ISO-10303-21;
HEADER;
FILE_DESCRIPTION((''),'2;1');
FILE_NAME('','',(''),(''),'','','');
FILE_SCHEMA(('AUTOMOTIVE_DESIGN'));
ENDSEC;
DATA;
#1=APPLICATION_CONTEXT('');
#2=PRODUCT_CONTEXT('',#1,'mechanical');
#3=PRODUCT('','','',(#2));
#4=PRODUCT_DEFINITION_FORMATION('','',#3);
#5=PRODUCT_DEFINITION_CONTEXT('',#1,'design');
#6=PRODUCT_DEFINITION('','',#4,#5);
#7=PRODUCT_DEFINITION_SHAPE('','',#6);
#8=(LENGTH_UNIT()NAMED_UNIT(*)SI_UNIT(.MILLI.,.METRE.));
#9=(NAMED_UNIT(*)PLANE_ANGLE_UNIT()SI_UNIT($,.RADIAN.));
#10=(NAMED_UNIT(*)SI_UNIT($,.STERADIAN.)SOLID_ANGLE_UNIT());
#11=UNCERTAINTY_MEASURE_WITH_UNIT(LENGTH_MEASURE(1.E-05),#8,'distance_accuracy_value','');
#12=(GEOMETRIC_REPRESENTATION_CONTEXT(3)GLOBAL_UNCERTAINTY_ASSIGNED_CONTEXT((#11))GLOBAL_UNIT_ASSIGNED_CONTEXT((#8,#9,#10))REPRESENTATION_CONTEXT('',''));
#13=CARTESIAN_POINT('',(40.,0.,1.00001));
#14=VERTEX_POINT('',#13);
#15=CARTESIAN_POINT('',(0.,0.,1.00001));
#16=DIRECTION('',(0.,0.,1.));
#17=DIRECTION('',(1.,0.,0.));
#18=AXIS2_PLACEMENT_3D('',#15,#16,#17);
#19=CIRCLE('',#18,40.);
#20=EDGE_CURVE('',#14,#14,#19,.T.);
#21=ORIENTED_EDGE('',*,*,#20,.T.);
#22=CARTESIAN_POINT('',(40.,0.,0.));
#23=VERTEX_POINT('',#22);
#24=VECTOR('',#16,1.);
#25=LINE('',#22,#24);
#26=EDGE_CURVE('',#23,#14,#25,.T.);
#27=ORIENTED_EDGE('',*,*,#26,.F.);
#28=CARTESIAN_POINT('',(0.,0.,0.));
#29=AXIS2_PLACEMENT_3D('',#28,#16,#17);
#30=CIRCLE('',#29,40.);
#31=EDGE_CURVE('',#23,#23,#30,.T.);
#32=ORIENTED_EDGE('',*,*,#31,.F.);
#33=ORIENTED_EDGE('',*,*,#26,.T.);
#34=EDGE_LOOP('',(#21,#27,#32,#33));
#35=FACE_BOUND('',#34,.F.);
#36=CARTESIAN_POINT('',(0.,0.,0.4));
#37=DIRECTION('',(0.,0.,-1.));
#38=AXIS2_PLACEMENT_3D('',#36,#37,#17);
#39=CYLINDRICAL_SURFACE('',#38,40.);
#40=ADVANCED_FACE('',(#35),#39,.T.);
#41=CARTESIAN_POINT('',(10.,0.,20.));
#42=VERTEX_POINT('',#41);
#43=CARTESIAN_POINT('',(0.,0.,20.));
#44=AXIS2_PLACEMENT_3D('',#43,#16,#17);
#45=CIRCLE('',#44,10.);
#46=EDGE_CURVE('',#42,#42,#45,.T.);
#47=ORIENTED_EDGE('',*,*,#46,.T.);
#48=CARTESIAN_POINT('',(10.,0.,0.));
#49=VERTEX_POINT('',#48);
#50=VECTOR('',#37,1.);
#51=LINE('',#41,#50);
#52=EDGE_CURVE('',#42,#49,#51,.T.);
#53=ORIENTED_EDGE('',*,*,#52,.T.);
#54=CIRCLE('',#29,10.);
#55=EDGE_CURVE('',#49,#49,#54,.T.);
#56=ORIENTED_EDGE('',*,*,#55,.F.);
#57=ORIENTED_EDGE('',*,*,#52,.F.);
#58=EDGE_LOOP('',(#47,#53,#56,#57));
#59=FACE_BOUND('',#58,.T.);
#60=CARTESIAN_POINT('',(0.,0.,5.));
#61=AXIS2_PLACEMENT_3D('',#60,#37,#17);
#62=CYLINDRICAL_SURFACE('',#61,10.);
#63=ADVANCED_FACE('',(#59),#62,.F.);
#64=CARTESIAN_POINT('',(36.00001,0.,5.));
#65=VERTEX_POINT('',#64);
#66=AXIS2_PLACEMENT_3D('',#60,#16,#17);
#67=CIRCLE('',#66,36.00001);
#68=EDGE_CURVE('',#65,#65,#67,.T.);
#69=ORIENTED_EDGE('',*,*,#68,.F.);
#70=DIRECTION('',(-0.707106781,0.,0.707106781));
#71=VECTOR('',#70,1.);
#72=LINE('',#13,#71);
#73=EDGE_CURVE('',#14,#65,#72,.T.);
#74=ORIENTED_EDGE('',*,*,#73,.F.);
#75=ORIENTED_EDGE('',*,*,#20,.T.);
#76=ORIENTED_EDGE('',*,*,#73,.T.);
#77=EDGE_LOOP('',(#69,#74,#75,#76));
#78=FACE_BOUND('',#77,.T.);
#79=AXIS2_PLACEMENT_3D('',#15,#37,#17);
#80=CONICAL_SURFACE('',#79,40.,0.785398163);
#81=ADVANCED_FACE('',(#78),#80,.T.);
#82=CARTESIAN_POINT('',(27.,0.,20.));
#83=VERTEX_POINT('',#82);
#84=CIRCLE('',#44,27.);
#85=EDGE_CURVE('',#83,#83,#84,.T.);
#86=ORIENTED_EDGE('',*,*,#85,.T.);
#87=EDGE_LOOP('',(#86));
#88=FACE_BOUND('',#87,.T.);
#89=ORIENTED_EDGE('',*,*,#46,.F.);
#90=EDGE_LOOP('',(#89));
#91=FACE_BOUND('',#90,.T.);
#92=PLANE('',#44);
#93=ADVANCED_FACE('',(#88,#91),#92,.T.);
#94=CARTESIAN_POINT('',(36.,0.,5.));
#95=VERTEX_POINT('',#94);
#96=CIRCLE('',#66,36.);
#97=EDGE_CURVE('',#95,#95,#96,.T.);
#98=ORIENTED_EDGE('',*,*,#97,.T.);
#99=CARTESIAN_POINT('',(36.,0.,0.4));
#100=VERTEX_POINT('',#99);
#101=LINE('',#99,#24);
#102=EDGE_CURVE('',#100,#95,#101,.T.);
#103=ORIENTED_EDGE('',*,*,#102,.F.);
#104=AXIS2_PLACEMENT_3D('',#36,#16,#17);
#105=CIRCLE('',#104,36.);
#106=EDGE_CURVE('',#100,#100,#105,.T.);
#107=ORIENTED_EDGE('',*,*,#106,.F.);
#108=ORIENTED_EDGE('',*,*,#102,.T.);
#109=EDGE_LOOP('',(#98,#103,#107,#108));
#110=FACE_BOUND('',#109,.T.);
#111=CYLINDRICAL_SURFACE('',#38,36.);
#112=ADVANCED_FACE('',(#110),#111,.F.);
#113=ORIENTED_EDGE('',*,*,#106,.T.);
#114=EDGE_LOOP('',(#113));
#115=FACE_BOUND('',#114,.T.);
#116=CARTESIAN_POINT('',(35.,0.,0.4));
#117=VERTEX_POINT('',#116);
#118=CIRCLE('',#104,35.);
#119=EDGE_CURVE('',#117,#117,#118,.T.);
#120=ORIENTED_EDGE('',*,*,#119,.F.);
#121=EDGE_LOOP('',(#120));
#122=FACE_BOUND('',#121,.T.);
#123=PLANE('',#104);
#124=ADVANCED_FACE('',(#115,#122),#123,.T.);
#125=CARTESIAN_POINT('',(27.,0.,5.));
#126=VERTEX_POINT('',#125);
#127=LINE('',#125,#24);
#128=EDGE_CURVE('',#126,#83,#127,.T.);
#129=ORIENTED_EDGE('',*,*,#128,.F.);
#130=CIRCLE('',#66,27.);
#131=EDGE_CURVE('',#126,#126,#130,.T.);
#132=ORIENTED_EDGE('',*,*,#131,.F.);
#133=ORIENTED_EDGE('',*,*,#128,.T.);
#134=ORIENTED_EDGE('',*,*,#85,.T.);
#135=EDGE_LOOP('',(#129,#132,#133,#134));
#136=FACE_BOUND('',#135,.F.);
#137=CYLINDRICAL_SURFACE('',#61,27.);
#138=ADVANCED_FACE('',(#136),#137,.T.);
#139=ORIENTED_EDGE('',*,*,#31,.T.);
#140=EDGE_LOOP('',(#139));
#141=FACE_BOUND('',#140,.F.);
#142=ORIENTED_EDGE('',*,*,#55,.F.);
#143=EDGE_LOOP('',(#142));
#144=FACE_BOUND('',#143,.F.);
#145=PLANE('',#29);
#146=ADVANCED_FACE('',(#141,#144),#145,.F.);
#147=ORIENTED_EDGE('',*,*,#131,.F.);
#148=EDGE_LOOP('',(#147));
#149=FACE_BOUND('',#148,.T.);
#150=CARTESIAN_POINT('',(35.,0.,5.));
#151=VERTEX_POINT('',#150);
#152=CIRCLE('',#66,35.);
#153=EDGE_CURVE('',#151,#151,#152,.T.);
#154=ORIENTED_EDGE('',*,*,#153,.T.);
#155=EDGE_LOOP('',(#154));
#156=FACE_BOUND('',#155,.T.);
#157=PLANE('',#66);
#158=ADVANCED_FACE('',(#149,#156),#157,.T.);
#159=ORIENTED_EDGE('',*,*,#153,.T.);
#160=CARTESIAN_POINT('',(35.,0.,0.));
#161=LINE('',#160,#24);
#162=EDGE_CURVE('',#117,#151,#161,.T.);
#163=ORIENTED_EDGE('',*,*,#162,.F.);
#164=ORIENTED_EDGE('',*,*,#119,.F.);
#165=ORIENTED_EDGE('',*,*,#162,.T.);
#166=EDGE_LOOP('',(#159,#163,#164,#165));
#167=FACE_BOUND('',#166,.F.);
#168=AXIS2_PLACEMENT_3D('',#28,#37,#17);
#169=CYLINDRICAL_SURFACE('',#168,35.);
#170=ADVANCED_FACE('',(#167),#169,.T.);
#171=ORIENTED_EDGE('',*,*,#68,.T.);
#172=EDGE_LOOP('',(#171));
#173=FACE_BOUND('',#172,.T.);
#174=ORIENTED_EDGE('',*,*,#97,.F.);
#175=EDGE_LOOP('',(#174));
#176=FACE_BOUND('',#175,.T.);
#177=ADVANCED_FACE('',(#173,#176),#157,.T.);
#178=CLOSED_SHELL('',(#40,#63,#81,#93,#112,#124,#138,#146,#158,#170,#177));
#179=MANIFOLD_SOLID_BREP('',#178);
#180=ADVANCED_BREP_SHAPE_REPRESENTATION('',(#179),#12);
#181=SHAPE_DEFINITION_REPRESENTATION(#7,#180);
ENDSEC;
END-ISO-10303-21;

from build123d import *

# Parameters (mm, degrees)
F0_R     = 35
F0_R_2   = 10
F1_DEPTH = 5
F2_R     = 27
F2_R_2   = 10
F3_DEPTH = 15
F0_R_3   = 40
F4_DEPTH = 0.4
F5_R     = 40
F5_R_2   = 36
F6_DEPTH = 4.6
F7_SIZE  = 3.99999


# Not quite as in the source:
# - a fillet or chamfer is up to 0.001 mm smaller than in the source, because OpenCascade refuses the exact size


with BuildPart() as f1:
    # F0 (on Top) → F1 (new body)
    with BuildSketch(Plane.XY):
        Circle(F0_R)
        Circle(F0_R_2, mode=Mode.SUBTRACT)
    extrude(amount=F1_DEPTH)

    # F2 (on face) → F3 (join)
    with BuildSketch(Plane.XY.offset(5)):
        Circle(F2_R)
        Circle(F2_R_2, mode=Mode.SUBTRACT)
    extrude(amount=F3_DEPTH)

    # F0 (on Top) → F4 (join)
    with BuildSketch(Plane.XY):
        Circle(F0_R_3)
        Circle(F0_R, mode=Mode.SUBTRACT)
    extrude(amount=F4_DEPTH)

    # F5 (on face) → F6 (join)
    with BuildSketch(Plane.XY.offset(0.4)):
        Circle(F5_R)
        Circle(F5_R_2, mode=Mode.SUBTRACT)
    extrude(amount=F6_DEPTH)

    # F7 (size 4 in the source; OpenCascade refuses exactly that, so slightly less here)
    f7_edges = [f1.edges().sort_by_distance(p)[0] for p in [
        (-40, 0, 5),
    ]]
    chamfer(f7_edges, length=F7_SIZE)


solid = f1.part
